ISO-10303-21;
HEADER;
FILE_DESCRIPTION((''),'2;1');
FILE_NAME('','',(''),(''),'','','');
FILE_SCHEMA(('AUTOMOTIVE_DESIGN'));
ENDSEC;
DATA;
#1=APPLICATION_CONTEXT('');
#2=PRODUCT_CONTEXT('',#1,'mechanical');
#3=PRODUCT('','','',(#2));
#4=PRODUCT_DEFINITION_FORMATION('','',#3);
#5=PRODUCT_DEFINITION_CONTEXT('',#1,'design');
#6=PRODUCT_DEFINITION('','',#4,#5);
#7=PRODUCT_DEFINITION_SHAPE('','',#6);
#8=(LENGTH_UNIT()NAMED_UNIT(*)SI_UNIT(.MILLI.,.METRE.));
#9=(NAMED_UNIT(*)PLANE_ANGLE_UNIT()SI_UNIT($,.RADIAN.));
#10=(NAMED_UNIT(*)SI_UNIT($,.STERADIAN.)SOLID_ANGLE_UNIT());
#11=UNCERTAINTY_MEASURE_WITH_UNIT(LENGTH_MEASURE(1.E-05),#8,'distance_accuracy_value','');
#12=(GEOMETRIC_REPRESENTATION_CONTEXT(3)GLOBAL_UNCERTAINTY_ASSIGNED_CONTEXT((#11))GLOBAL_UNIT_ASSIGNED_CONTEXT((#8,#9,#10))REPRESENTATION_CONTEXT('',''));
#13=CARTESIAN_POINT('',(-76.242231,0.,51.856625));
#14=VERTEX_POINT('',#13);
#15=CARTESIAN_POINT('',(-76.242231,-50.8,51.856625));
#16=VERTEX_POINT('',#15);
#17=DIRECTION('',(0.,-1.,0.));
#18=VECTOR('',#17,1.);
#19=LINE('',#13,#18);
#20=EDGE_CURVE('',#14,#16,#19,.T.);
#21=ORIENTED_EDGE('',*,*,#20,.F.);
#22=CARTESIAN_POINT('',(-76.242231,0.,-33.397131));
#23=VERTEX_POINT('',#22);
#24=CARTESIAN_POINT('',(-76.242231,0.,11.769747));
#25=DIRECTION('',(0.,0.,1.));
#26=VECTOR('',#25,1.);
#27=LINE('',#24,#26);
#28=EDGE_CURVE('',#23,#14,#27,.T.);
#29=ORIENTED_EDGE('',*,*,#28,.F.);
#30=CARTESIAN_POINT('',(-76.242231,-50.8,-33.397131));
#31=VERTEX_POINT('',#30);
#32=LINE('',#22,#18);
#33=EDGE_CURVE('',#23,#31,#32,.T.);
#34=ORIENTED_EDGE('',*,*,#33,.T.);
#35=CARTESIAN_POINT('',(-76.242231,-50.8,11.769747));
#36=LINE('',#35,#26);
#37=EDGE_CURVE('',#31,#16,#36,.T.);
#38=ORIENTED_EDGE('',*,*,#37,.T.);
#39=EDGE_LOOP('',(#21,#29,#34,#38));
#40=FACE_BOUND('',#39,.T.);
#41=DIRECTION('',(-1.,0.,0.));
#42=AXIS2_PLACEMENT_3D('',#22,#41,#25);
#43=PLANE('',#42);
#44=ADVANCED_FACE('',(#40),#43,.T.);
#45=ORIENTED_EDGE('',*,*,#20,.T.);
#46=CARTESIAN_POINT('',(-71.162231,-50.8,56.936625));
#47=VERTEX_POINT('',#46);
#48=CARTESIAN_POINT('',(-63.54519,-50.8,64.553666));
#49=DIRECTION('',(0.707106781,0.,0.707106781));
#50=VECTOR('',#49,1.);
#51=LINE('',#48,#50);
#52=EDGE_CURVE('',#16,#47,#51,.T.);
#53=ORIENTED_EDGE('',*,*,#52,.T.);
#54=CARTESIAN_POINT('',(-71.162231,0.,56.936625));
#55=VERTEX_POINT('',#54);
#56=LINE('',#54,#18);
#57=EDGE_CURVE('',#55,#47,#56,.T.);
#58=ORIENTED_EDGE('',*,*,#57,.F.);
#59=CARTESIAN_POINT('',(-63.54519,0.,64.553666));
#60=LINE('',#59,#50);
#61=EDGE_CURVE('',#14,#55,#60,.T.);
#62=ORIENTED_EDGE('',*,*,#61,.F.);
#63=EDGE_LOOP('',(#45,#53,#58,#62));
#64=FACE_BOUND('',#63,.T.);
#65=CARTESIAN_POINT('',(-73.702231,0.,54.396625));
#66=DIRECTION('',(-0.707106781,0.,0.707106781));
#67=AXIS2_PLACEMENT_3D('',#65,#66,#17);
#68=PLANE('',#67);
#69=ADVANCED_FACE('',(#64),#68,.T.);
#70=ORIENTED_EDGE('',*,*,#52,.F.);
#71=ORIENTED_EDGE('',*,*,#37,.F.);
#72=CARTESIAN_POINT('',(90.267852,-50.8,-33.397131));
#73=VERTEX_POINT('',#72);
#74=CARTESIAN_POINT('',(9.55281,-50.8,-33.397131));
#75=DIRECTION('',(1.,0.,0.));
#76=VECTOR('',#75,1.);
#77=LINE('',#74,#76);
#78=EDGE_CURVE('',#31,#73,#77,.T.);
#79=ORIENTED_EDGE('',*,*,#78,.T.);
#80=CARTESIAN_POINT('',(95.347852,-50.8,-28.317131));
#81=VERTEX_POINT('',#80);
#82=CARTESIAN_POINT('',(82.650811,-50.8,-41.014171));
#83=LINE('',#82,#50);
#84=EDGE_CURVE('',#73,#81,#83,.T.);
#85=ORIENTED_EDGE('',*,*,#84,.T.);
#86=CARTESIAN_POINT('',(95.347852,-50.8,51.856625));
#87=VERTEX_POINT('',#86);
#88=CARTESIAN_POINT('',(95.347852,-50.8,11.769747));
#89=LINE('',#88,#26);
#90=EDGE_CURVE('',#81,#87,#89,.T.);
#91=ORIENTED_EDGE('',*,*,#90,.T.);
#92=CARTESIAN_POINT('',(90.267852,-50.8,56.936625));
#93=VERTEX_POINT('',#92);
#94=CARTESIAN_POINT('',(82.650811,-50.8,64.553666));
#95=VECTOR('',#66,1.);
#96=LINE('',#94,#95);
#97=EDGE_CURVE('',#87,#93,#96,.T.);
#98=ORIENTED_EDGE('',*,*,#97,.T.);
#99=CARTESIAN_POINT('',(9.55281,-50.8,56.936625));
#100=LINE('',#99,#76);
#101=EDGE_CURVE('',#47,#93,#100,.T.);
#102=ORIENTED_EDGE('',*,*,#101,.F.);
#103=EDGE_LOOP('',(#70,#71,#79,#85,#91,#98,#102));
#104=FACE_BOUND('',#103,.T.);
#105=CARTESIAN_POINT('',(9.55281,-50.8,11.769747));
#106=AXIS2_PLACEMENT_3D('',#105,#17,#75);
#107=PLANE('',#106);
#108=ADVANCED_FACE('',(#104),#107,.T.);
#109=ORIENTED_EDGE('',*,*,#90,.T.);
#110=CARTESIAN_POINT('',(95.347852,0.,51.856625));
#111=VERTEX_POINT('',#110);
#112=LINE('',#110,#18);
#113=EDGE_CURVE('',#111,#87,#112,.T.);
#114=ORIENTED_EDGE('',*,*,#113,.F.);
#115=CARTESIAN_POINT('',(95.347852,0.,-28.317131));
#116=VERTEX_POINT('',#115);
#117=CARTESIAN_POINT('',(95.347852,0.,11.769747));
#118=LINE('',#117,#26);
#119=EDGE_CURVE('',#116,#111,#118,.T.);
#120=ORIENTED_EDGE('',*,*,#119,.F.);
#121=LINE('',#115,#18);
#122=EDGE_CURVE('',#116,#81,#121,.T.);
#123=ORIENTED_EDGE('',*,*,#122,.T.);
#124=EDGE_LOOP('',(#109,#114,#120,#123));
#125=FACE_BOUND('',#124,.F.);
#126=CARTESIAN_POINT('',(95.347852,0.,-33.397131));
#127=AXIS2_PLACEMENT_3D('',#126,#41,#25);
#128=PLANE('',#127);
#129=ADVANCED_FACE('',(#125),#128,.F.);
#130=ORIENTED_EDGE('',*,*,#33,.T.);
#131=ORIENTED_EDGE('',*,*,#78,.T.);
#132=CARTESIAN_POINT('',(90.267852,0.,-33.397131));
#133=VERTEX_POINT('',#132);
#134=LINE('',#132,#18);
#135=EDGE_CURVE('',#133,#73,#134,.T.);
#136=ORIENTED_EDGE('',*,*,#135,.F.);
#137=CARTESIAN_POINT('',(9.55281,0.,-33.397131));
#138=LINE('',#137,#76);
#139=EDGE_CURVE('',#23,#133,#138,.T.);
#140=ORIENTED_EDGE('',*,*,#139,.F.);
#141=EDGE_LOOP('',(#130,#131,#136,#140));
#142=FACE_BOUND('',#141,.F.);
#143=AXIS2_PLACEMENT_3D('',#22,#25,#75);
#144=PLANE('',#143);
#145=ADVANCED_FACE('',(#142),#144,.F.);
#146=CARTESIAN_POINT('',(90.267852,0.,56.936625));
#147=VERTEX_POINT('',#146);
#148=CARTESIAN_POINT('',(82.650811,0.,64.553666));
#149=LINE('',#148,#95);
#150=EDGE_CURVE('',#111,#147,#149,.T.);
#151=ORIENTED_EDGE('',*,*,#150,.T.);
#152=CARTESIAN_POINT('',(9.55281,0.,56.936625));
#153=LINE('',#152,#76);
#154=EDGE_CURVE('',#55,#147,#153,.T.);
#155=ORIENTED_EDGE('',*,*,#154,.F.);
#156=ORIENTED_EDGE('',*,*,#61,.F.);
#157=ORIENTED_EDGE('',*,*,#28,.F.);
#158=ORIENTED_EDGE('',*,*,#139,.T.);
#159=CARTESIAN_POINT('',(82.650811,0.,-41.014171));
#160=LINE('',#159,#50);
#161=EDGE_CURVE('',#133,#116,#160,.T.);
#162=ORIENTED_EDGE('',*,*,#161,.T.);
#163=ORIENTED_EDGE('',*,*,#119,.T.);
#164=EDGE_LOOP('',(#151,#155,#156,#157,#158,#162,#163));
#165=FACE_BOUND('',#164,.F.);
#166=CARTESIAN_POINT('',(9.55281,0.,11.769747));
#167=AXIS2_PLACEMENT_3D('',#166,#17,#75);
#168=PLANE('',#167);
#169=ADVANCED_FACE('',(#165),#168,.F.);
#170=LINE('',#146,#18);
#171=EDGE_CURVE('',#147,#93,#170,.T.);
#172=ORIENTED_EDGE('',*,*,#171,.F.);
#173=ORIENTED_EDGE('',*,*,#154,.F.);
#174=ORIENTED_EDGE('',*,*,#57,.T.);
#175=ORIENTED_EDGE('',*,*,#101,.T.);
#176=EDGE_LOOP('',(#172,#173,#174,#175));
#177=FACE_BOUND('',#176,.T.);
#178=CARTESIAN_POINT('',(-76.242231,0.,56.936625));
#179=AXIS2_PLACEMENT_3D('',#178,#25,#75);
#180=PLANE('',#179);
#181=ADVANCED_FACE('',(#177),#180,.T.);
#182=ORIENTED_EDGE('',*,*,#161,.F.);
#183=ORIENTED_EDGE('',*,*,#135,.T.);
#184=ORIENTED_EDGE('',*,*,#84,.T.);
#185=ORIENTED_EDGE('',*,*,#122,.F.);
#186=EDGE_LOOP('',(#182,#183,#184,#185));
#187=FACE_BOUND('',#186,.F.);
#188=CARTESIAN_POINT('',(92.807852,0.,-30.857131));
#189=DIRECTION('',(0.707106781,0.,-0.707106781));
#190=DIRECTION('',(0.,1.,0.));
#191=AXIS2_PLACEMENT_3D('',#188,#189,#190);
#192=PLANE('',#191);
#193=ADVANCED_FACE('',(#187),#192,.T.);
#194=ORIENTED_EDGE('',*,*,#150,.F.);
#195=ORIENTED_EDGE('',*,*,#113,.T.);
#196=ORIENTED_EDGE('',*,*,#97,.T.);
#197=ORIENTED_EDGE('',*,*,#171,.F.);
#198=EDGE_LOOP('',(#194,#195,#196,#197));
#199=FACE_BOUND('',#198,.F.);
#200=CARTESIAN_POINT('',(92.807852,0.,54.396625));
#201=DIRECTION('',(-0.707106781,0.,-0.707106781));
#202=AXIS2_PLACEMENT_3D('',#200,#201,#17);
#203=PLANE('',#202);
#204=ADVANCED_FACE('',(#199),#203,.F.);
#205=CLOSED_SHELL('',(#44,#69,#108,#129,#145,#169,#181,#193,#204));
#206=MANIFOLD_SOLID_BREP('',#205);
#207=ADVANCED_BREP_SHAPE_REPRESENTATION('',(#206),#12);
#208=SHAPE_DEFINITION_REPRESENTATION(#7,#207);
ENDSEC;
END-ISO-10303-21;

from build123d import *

# Parameters (mm, degrees)
F0_W     = 171.5900823474
F0_H     = 90.3337560594
F1_DEPTH = 50.8
F3_SIZE  = 5.08


# Not quite as in the source:
# - a feature names something its author has since deleted; it is built from what else it names


with BuildPart() as f1:
    # F0 (on Front) → F1 (new body)
    with BuildSketch(Plane.XZ):
        with Locations((9.5528103411, 11.7697473615)):
            Rectangle(F0_W, F0_H)
    extrude(amount=F1_DEPTH)

    # F3
    f3_edges = [f1.edges().sort_by_distance(p)[0] for p in [
        (-76.242231, -25.4, 56.936625),
        (95.347852, -25.4, 56.936625),
        (95.347852, -25.4, -33.397131),
    ]]
    chamfer(f3_edges, length=F3_SIZE)


solid = f1.part
